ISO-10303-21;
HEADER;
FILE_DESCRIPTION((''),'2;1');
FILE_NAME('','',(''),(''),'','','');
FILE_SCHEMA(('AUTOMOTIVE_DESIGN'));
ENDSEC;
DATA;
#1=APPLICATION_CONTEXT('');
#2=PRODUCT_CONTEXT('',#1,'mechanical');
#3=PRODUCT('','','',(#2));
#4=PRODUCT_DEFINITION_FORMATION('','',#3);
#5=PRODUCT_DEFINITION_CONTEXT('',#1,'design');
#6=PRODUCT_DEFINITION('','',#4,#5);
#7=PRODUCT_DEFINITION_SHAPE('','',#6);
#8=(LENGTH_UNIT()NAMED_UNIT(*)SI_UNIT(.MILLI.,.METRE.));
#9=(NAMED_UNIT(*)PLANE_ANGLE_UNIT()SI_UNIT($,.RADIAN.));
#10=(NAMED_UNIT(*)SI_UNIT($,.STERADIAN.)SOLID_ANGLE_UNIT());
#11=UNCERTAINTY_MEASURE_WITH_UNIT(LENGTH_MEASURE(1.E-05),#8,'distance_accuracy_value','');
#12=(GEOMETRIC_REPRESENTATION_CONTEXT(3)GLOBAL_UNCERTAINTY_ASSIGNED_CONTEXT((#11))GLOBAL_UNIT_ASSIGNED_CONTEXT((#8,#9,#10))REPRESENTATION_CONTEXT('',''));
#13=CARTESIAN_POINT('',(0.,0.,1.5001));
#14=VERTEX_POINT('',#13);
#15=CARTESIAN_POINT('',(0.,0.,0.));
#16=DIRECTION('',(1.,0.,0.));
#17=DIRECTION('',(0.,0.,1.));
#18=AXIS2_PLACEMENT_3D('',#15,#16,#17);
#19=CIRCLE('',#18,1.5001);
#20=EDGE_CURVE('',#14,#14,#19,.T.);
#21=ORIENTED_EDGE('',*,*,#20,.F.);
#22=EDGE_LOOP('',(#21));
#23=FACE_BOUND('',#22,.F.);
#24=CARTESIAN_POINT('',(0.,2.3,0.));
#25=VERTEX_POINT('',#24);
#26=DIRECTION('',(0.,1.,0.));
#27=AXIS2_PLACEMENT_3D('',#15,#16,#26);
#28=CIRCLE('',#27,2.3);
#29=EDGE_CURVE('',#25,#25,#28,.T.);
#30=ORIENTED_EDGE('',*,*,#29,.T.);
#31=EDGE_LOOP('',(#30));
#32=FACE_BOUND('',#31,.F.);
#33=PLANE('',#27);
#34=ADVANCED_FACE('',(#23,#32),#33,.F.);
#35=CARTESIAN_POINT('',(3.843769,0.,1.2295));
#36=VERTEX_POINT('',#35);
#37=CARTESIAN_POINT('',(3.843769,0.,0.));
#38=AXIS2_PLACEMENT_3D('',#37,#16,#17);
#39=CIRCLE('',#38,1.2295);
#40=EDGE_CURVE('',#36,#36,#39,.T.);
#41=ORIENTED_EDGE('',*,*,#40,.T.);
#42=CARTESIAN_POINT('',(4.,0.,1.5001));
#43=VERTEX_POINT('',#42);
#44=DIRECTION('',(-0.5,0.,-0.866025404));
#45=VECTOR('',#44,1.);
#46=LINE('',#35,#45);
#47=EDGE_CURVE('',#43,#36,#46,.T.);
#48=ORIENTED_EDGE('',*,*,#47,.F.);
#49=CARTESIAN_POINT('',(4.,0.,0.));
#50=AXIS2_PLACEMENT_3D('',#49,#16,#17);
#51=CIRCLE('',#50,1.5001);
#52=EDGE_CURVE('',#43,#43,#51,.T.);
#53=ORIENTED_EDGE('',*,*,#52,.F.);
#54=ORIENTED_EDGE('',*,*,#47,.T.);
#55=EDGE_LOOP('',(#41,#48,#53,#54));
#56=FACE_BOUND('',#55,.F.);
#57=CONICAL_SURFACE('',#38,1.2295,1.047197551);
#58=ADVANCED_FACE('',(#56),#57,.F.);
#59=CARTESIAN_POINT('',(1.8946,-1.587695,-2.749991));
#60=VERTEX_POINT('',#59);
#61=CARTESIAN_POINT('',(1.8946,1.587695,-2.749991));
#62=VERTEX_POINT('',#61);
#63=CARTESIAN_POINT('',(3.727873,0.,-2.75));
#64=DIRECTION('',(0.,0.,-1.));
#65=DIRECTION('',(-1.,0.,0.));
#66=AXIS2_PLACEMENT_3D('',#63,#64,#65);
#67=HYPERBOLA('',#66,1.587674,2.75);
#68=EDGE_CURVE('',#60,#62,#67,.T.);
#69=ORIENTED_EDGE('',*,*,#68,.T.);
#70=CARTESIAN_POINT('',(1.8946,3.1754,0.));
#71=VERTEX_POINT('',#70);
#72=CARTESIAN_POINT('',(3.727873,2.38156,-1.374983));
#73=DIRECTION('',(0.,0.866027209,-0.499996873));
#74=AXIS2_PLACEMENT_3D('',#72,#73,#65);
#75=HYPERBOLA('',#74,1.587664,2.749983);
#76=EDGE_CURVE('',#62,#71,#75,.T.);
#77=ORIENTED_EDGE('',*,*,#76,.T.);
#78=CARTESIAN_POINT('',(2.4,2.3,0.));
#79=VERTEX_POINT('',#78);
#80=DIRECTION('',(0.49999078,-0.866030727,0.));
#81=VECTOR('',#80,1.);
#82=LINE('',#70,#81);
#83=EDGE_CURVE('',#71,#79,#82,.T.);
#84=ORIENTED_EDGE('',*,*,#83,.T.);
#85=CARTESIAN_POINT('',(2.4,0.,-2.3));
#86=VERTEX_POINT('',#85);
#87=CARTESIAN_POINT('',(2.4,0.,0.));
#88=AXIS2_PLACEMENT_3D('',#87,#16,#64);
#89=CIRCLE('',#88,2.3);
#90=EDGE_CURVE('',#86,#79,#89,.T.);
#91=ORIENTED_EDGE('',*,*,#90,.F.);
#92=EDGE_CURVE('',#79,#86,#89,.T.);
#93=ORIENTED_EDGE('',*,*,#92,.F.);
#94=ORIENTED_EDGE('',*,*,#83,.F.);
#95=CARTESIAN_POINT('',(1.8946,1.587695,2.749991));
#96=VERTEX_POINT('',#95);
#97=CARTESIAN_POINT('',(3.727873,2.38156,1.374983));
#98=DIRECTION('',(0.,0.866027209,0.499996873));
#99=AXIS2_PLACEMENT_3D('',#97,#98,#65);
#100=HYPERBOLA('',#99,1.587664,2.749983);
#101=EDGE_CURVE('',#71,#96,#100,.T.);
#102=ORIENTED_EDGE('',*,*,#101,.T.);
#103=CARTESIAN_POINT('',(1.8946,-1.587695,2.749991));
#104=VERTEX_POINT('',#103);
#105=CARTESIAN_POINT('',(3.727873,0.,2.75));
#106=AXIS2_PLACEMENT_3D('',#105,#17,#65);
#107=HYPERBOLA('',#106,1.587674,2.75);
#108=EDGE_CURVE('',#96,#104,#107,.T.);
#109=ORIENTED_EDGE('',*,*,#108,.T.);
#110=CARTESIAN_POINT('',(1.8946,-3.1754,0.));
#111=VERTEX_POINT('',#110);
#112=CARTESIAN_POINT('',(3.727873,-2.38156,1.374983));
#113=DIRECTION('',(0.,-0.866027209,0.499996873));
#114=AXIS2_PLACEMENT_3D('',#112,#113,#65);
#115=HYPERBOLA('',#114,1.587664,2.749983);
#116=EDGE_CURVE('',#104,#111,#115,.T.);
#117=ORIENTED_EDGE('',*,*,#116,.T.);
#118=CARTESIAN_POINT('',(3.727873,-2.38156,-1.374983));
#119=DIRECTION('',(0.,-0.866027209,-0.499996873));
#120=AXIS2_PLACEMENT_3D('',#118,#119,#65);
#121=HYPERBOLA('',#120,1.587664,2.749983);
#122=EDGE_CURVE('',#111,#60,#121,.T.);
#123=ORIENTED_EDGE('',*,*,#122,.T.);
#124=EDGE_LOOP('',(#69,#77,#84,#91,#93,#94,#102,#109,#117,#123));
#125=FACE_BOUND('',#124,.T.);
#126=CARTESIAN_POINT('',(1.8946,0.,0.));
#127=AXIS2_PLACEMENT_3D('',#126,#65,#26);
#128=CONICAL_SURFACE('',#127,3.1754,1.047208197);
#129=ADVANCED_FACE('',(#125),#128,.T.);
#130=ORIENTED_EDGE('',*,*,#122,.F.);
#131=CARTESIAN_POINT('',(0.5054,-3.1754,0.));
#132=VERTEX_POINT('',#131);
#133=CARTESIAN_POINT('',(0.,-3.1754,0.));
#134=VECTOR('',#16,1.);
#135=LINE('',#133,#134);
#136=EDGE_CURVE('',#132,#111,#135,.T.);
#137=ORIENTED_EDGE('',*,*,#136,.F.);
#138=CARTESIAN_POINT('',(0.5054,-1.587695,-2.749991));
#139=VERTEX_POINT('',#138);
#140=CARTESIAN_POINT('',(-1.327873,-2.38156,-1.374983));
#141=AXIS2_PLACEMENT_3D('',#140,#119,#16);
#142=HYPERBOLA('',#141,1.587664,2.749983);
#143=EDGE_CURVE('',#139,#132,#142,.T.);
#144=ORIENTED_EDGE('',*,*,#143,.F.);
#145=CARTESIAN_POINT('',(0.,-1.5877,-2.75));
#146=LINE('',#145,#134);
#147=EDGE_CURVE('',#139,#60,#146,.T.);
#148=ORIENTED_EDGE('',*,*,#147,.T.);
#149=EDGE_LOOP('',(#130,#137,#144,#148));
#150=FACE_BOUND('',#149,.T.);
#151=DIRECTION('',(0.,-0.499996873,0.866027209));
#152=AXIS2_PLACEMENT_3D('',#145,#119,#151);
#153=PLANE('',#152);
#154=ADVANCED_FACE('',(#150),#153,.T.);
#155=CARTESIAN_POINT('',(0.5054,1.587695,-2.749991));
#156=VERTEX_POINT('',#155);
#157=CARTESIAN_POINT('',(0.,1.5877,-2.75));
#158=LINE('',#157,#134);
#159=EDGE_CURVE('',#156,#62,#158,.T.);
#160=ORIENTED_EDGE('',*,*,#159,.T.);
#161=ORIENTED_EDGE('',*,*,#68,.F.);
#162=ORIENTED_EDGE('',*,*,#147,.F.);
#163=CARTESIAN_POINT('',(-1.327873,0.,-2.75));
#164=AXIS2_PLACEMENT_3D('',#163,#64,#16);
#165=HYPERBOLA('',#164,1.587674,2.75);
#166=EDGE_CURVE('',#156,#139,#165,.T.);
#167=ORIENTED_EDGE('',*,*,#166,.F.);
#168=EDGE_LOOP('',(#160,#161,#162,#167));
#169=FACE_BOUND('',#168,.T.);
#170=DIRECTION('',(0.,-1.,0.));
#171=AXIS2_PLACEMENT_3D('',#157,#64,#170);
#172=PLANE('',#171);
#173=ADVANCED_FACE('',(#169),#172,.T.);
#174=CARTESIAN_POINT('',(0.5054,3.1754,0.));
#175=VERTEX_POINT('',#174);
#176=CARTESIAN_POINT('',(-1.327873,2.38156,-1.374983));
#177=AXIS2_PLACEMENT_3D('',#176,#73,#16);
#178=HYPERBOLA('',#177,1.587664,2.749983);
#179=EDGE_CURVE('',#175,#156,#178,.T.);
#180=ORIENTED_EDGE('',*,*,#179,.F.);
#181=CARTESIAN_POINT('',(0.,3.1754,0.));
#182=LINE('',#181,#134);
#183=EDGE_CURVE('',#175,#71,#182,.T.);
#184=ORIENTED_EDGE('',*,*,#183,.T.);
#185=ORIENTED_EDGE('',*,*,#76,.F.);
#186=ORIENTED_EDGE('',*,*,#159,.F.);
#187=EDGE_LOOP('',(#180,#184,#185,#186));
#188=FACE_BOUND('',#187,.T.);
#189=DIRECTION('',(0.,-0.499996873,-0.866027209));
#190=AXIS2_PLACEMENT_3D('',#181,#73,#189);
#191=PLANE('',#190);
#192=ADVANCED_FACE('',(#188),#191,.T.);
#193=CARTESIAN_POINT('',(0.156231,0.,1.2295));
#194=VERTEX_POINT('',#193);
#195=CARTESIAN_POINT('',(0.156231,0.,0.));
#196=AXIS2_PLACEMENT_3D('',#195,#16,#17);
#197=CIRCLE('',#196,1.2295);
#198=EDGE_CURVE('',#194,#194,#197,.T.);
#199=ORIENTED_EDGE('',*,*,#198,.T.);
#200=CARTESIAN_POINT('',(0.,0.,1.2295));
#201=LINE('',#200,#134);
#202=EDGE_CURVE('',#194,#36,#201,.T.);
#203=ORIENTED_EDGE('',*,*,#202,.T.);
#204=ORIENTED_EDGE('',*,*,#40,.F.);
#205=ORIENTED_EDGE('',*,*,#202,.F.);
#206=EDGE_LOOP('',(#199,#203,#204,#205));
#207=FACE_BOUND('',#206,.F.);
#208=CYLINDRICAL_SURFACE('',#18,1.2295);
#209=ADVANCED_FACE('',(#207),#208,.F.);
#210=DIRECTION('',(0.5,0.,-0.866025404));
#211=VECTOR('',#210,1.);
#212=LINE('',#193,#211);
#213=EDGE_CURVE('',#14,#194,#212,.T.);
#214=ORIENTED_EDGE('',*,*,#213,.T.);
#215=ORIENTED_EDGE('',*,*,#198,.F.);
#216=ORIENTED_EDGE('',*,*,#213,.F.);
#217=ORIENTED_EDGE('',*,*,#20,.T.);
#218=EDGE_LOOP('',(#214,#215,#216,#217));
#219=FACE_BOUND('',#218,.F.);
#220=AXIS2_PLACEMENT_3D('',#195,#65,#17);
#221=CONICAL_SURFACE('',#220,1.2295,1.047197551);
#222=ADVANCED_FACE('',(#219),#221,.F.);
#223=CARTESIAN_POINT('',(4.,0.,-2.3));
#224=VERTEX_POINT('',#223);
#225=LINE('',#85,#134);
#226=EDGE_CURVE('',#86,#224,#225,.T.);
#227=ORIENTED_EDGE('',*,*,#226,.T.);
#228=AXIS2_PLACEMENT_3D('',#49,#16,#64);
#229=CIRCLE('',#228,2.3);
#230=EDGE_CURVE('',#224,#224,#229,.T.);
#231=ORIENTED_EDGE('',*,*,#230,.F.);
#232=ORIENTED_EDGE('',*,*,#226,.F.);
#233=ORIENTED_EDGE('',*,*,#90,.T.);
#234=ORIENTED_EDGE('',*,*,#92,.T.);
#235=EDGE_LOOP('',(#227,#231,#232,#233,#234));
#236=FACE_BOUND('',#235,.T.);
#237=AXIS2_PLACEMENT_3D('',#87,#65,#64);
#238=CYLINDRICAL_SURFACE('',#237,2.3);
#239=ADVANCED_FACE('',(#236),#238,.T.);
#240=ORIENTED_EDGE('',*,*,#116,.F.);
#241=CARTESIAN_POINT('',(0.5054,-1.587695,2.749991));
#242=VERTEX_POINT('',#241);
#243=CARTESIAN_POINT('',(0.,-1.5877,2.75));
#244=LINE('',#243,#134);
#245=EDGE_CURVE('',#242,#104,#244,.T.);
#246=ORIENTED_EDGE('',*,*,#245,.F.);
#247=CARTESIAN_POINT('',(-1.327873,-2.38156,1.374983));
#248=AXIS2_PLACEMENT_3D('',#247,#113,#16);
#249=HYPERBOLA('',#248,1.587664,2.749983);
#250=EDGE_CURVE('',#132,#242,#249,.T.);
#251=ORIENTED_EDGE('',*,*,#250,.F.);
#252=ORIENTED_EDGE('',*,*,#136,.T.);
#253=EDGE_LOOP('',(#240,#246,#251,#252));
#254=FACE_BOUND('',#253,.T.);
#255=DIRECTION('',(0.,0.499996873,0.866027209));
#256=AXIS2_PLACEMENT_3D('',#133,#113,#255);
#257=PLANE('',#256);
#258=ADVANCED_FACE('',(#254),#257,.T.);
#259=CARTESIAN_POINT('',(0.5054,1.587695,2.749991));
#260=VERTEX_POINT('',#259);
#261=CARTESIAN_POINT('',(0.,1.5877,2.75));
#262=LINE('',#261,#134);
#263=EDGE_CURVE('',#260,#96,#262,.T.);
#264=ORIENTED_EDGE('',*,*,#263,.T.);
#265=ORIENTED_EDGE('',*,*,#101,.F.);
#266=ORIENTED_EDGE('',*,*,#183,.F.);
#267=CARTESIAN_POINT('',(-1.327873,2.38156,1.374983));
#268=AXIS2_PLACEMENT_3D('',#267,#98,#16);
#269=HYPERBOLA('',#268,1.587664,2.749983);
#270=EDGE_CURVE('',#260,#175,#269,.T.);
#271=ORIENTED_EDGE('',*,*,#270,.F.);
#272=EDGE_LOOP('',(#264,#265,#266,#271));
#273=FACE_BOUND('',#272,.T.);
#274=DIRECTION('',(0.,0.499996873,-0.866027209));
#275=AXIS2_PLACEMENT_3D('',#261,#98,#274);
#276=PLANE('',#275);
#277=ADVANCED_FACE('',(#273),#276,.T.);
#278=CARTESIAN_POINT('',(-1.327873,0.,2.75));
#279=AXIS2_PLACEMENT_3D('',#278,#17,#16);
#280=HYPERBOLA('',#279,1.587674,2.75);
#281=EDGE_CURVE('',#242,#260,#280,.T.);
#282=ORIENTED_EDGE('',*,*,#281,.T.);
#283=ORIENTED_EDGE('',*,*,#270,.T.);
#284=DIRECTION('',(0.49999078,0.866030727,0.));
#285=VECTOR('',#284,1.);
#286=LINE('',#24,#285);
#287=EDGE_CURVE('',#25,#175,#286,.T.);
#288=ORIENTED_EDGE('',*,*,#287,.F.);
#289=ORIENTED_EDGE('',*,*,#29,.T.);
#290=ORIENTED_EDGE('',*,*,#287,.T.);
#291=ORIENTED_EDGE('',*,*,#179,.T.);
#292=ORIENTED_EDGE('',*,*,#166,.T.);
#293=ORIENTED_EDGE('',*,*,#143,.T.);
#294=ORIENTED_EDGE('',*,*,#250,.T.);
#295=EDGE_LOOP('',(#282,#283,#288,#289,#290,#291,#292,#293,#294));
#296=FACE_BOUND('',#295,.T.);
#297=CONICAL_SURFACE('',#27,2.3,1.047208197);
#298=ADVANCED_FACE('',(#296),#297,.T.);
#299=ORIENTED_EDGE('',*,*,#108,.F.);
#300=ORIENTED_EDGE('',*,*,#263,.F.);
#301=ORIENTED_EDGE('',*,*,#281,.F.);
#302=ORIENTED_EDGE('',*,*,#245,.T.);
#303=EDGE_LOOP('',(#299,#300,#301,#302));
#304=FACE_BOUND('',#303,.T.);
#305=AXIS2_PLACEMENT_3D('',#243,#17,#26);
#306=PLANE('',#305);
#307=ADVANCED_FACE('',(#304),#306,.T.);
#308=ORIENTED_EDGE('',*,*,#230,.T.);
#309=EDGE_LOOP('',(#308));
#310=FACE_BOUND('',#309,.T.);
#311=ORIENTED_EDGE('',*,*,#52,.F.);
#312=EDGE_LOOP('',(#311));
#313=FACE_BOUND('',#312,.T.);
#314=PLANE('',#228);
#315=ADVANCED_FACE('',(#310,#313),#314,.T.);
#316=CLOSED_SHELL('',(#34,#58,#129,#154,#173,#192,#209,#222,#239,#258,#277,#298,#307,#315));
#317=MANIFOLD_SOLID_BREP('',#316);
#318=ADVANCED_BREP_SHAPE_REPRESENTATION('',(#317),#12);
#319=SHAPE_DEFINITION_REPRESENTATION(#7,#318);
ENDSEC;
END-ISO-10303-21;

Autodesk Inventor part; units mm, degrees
ref_plane "YZ Plane" through (0, 0, 0) normal (1, 0, 0) x (0, 1, 0)
ref_plane "XZ Plane" through (0, 0, 0) normal (0, 1, 0) x (-1, 0, 0)
sketch "Esquisse1" plane through (0, 0, 0) normal (1, 0, 0) x (0, 1, 0)
  line L0 (1.5877, -2.75) -> (-1.5877, -2.75)
  line L1 (-1.5877, -2.75) -> (-3.1754, 0)
  line L2 (-3.1754, 0) -> (-1.5877, 2.75)
  line L3 (-1.5877, 2.75) -> (1.5877, 2.75)
  line L4 (1.5877, 2.75) -> (3.1754, 0)
  line L5 (3.1754, 0) -> (1.5877, -2.75)
  point P0 (0, 0)
  point P1 (0, 0)
  dimension "d0" = 6.3509
extrude "Corps" add sketch "Esquisse1" along normal blind 2.4
sketch "Esquisse2" plane through (2.4, 0, 0) normal (1, 0, 0) x (0, 0, -1)
  circle A0 centre (0, 0) radius 2.3
  dimension "d7" = 4.6
extrude "Anneau" add sketch "Esquisse2" along normal blind 1.6
sketch "Esquisse3" plane through (0, 0, 0) normal (0, 0, 1) x (1, 0, 0)
  line L0 (0, 1.5877) -> (0, 3.1754) projected
  line L1 (0, 3.1754) -> (2.4, 3.1754) projected
  line L2 (2.4, 1.5877) -> (2.4, 3.1754) projected
  line L3 (-0.48, 0) -> (2.88, 0) projected
  line L4 (0, 2.3) -> (0.5054, 3.1754)
  line L5 (1.8946, 3.1754) -> (2.4, 2.3)
  dimension "d3" = 30
  dimension "d4" = 30
  dimension "d5" = 4.6
  dimension "d6" = 4.6
revolve "Chanfrein1" cut sketch "Esquisse3" angle 360 about axis through (-10, 0, 0) along (1, 0, 0)
sketch "Esquisse4" plane through (0, 0, 0) normal (-1, 0, 0) x (0, 0, 1)
  line L0 (0, -4.4456) -> (0, 4.4456) projected
  line L1 (-3.85, 0) -> (3.85, 0) projected
  point P0 (0, 0)
hole "Filetage" at (0, 0, 0) direction (1, 0, 0) diameter 2.459 end through all thread size "M3x0.5" class "6H" standard "ISO Metric profile"
chamfer "Chanfrein2" distance 0.2706 angle 30 1 edges at (0, 0, -1.2295) measured on face at (0, 1.9179, -0.2329)
chamfer "Chanfrein3" distance 0.2706 angle 30 1 edges at (4, 0, -1.2295) measured on face at (4, -0.2816, -1.909)
ref_plane "Work Plane1" through (9.305, 0, 0) normal (0, 0, 1) x (-1, 0, 0)
equation "\"d0\" = 1.1547 * SW"
equation "\"d1\" = KOH1"
equation "\"d7\" = SD2"
equation "\"d8\" = KOH - KOH1"
equation "\"d3\" = ANG1"
equation "\"d4\" = ANG2"
equation "\"d5\" = SW0"
equation "\"d6\" = SW01"
equation "\"d10\" = -0.5 * GD1 + 0.5 * NND"
equation "\"d46\" = -0.5 * GD1 + 0.5 * NND"
equation "\"d12\" = -0.5 * GD1 + 0.5 * NND"
equation "\"d47\" = -0.5 * GD1 + 0.5 * NND"
equation "\"ANG1\" = 30deg"
equation "\"ANG2\" = 30deg"
equation "\"NND\" = 3"
equation "\"KOH1\" = 2.4"
equation "\"KOH\" = 4"
equation "\"SW\" = 5.5"
equation "\"SW0\" = 4.6"
equation "\"SW01\" = SW0"
equation "\"SD2\" = SW0"
equation "\"GUL\" = 0.541266 * PTC"
equation "\"THREADDIA\" = 3"
equation "\"TOA\" = 30deg"
equation "\"PTC\" = 0.5"
equation "\"GAL\" = 0.541266 * PTC"
equation "\"E0\" = 1.155 * SW"
equation "\"GD1\" = 2.458734"
properties part number "DIN 985 - M3" material "Acier, doux"
